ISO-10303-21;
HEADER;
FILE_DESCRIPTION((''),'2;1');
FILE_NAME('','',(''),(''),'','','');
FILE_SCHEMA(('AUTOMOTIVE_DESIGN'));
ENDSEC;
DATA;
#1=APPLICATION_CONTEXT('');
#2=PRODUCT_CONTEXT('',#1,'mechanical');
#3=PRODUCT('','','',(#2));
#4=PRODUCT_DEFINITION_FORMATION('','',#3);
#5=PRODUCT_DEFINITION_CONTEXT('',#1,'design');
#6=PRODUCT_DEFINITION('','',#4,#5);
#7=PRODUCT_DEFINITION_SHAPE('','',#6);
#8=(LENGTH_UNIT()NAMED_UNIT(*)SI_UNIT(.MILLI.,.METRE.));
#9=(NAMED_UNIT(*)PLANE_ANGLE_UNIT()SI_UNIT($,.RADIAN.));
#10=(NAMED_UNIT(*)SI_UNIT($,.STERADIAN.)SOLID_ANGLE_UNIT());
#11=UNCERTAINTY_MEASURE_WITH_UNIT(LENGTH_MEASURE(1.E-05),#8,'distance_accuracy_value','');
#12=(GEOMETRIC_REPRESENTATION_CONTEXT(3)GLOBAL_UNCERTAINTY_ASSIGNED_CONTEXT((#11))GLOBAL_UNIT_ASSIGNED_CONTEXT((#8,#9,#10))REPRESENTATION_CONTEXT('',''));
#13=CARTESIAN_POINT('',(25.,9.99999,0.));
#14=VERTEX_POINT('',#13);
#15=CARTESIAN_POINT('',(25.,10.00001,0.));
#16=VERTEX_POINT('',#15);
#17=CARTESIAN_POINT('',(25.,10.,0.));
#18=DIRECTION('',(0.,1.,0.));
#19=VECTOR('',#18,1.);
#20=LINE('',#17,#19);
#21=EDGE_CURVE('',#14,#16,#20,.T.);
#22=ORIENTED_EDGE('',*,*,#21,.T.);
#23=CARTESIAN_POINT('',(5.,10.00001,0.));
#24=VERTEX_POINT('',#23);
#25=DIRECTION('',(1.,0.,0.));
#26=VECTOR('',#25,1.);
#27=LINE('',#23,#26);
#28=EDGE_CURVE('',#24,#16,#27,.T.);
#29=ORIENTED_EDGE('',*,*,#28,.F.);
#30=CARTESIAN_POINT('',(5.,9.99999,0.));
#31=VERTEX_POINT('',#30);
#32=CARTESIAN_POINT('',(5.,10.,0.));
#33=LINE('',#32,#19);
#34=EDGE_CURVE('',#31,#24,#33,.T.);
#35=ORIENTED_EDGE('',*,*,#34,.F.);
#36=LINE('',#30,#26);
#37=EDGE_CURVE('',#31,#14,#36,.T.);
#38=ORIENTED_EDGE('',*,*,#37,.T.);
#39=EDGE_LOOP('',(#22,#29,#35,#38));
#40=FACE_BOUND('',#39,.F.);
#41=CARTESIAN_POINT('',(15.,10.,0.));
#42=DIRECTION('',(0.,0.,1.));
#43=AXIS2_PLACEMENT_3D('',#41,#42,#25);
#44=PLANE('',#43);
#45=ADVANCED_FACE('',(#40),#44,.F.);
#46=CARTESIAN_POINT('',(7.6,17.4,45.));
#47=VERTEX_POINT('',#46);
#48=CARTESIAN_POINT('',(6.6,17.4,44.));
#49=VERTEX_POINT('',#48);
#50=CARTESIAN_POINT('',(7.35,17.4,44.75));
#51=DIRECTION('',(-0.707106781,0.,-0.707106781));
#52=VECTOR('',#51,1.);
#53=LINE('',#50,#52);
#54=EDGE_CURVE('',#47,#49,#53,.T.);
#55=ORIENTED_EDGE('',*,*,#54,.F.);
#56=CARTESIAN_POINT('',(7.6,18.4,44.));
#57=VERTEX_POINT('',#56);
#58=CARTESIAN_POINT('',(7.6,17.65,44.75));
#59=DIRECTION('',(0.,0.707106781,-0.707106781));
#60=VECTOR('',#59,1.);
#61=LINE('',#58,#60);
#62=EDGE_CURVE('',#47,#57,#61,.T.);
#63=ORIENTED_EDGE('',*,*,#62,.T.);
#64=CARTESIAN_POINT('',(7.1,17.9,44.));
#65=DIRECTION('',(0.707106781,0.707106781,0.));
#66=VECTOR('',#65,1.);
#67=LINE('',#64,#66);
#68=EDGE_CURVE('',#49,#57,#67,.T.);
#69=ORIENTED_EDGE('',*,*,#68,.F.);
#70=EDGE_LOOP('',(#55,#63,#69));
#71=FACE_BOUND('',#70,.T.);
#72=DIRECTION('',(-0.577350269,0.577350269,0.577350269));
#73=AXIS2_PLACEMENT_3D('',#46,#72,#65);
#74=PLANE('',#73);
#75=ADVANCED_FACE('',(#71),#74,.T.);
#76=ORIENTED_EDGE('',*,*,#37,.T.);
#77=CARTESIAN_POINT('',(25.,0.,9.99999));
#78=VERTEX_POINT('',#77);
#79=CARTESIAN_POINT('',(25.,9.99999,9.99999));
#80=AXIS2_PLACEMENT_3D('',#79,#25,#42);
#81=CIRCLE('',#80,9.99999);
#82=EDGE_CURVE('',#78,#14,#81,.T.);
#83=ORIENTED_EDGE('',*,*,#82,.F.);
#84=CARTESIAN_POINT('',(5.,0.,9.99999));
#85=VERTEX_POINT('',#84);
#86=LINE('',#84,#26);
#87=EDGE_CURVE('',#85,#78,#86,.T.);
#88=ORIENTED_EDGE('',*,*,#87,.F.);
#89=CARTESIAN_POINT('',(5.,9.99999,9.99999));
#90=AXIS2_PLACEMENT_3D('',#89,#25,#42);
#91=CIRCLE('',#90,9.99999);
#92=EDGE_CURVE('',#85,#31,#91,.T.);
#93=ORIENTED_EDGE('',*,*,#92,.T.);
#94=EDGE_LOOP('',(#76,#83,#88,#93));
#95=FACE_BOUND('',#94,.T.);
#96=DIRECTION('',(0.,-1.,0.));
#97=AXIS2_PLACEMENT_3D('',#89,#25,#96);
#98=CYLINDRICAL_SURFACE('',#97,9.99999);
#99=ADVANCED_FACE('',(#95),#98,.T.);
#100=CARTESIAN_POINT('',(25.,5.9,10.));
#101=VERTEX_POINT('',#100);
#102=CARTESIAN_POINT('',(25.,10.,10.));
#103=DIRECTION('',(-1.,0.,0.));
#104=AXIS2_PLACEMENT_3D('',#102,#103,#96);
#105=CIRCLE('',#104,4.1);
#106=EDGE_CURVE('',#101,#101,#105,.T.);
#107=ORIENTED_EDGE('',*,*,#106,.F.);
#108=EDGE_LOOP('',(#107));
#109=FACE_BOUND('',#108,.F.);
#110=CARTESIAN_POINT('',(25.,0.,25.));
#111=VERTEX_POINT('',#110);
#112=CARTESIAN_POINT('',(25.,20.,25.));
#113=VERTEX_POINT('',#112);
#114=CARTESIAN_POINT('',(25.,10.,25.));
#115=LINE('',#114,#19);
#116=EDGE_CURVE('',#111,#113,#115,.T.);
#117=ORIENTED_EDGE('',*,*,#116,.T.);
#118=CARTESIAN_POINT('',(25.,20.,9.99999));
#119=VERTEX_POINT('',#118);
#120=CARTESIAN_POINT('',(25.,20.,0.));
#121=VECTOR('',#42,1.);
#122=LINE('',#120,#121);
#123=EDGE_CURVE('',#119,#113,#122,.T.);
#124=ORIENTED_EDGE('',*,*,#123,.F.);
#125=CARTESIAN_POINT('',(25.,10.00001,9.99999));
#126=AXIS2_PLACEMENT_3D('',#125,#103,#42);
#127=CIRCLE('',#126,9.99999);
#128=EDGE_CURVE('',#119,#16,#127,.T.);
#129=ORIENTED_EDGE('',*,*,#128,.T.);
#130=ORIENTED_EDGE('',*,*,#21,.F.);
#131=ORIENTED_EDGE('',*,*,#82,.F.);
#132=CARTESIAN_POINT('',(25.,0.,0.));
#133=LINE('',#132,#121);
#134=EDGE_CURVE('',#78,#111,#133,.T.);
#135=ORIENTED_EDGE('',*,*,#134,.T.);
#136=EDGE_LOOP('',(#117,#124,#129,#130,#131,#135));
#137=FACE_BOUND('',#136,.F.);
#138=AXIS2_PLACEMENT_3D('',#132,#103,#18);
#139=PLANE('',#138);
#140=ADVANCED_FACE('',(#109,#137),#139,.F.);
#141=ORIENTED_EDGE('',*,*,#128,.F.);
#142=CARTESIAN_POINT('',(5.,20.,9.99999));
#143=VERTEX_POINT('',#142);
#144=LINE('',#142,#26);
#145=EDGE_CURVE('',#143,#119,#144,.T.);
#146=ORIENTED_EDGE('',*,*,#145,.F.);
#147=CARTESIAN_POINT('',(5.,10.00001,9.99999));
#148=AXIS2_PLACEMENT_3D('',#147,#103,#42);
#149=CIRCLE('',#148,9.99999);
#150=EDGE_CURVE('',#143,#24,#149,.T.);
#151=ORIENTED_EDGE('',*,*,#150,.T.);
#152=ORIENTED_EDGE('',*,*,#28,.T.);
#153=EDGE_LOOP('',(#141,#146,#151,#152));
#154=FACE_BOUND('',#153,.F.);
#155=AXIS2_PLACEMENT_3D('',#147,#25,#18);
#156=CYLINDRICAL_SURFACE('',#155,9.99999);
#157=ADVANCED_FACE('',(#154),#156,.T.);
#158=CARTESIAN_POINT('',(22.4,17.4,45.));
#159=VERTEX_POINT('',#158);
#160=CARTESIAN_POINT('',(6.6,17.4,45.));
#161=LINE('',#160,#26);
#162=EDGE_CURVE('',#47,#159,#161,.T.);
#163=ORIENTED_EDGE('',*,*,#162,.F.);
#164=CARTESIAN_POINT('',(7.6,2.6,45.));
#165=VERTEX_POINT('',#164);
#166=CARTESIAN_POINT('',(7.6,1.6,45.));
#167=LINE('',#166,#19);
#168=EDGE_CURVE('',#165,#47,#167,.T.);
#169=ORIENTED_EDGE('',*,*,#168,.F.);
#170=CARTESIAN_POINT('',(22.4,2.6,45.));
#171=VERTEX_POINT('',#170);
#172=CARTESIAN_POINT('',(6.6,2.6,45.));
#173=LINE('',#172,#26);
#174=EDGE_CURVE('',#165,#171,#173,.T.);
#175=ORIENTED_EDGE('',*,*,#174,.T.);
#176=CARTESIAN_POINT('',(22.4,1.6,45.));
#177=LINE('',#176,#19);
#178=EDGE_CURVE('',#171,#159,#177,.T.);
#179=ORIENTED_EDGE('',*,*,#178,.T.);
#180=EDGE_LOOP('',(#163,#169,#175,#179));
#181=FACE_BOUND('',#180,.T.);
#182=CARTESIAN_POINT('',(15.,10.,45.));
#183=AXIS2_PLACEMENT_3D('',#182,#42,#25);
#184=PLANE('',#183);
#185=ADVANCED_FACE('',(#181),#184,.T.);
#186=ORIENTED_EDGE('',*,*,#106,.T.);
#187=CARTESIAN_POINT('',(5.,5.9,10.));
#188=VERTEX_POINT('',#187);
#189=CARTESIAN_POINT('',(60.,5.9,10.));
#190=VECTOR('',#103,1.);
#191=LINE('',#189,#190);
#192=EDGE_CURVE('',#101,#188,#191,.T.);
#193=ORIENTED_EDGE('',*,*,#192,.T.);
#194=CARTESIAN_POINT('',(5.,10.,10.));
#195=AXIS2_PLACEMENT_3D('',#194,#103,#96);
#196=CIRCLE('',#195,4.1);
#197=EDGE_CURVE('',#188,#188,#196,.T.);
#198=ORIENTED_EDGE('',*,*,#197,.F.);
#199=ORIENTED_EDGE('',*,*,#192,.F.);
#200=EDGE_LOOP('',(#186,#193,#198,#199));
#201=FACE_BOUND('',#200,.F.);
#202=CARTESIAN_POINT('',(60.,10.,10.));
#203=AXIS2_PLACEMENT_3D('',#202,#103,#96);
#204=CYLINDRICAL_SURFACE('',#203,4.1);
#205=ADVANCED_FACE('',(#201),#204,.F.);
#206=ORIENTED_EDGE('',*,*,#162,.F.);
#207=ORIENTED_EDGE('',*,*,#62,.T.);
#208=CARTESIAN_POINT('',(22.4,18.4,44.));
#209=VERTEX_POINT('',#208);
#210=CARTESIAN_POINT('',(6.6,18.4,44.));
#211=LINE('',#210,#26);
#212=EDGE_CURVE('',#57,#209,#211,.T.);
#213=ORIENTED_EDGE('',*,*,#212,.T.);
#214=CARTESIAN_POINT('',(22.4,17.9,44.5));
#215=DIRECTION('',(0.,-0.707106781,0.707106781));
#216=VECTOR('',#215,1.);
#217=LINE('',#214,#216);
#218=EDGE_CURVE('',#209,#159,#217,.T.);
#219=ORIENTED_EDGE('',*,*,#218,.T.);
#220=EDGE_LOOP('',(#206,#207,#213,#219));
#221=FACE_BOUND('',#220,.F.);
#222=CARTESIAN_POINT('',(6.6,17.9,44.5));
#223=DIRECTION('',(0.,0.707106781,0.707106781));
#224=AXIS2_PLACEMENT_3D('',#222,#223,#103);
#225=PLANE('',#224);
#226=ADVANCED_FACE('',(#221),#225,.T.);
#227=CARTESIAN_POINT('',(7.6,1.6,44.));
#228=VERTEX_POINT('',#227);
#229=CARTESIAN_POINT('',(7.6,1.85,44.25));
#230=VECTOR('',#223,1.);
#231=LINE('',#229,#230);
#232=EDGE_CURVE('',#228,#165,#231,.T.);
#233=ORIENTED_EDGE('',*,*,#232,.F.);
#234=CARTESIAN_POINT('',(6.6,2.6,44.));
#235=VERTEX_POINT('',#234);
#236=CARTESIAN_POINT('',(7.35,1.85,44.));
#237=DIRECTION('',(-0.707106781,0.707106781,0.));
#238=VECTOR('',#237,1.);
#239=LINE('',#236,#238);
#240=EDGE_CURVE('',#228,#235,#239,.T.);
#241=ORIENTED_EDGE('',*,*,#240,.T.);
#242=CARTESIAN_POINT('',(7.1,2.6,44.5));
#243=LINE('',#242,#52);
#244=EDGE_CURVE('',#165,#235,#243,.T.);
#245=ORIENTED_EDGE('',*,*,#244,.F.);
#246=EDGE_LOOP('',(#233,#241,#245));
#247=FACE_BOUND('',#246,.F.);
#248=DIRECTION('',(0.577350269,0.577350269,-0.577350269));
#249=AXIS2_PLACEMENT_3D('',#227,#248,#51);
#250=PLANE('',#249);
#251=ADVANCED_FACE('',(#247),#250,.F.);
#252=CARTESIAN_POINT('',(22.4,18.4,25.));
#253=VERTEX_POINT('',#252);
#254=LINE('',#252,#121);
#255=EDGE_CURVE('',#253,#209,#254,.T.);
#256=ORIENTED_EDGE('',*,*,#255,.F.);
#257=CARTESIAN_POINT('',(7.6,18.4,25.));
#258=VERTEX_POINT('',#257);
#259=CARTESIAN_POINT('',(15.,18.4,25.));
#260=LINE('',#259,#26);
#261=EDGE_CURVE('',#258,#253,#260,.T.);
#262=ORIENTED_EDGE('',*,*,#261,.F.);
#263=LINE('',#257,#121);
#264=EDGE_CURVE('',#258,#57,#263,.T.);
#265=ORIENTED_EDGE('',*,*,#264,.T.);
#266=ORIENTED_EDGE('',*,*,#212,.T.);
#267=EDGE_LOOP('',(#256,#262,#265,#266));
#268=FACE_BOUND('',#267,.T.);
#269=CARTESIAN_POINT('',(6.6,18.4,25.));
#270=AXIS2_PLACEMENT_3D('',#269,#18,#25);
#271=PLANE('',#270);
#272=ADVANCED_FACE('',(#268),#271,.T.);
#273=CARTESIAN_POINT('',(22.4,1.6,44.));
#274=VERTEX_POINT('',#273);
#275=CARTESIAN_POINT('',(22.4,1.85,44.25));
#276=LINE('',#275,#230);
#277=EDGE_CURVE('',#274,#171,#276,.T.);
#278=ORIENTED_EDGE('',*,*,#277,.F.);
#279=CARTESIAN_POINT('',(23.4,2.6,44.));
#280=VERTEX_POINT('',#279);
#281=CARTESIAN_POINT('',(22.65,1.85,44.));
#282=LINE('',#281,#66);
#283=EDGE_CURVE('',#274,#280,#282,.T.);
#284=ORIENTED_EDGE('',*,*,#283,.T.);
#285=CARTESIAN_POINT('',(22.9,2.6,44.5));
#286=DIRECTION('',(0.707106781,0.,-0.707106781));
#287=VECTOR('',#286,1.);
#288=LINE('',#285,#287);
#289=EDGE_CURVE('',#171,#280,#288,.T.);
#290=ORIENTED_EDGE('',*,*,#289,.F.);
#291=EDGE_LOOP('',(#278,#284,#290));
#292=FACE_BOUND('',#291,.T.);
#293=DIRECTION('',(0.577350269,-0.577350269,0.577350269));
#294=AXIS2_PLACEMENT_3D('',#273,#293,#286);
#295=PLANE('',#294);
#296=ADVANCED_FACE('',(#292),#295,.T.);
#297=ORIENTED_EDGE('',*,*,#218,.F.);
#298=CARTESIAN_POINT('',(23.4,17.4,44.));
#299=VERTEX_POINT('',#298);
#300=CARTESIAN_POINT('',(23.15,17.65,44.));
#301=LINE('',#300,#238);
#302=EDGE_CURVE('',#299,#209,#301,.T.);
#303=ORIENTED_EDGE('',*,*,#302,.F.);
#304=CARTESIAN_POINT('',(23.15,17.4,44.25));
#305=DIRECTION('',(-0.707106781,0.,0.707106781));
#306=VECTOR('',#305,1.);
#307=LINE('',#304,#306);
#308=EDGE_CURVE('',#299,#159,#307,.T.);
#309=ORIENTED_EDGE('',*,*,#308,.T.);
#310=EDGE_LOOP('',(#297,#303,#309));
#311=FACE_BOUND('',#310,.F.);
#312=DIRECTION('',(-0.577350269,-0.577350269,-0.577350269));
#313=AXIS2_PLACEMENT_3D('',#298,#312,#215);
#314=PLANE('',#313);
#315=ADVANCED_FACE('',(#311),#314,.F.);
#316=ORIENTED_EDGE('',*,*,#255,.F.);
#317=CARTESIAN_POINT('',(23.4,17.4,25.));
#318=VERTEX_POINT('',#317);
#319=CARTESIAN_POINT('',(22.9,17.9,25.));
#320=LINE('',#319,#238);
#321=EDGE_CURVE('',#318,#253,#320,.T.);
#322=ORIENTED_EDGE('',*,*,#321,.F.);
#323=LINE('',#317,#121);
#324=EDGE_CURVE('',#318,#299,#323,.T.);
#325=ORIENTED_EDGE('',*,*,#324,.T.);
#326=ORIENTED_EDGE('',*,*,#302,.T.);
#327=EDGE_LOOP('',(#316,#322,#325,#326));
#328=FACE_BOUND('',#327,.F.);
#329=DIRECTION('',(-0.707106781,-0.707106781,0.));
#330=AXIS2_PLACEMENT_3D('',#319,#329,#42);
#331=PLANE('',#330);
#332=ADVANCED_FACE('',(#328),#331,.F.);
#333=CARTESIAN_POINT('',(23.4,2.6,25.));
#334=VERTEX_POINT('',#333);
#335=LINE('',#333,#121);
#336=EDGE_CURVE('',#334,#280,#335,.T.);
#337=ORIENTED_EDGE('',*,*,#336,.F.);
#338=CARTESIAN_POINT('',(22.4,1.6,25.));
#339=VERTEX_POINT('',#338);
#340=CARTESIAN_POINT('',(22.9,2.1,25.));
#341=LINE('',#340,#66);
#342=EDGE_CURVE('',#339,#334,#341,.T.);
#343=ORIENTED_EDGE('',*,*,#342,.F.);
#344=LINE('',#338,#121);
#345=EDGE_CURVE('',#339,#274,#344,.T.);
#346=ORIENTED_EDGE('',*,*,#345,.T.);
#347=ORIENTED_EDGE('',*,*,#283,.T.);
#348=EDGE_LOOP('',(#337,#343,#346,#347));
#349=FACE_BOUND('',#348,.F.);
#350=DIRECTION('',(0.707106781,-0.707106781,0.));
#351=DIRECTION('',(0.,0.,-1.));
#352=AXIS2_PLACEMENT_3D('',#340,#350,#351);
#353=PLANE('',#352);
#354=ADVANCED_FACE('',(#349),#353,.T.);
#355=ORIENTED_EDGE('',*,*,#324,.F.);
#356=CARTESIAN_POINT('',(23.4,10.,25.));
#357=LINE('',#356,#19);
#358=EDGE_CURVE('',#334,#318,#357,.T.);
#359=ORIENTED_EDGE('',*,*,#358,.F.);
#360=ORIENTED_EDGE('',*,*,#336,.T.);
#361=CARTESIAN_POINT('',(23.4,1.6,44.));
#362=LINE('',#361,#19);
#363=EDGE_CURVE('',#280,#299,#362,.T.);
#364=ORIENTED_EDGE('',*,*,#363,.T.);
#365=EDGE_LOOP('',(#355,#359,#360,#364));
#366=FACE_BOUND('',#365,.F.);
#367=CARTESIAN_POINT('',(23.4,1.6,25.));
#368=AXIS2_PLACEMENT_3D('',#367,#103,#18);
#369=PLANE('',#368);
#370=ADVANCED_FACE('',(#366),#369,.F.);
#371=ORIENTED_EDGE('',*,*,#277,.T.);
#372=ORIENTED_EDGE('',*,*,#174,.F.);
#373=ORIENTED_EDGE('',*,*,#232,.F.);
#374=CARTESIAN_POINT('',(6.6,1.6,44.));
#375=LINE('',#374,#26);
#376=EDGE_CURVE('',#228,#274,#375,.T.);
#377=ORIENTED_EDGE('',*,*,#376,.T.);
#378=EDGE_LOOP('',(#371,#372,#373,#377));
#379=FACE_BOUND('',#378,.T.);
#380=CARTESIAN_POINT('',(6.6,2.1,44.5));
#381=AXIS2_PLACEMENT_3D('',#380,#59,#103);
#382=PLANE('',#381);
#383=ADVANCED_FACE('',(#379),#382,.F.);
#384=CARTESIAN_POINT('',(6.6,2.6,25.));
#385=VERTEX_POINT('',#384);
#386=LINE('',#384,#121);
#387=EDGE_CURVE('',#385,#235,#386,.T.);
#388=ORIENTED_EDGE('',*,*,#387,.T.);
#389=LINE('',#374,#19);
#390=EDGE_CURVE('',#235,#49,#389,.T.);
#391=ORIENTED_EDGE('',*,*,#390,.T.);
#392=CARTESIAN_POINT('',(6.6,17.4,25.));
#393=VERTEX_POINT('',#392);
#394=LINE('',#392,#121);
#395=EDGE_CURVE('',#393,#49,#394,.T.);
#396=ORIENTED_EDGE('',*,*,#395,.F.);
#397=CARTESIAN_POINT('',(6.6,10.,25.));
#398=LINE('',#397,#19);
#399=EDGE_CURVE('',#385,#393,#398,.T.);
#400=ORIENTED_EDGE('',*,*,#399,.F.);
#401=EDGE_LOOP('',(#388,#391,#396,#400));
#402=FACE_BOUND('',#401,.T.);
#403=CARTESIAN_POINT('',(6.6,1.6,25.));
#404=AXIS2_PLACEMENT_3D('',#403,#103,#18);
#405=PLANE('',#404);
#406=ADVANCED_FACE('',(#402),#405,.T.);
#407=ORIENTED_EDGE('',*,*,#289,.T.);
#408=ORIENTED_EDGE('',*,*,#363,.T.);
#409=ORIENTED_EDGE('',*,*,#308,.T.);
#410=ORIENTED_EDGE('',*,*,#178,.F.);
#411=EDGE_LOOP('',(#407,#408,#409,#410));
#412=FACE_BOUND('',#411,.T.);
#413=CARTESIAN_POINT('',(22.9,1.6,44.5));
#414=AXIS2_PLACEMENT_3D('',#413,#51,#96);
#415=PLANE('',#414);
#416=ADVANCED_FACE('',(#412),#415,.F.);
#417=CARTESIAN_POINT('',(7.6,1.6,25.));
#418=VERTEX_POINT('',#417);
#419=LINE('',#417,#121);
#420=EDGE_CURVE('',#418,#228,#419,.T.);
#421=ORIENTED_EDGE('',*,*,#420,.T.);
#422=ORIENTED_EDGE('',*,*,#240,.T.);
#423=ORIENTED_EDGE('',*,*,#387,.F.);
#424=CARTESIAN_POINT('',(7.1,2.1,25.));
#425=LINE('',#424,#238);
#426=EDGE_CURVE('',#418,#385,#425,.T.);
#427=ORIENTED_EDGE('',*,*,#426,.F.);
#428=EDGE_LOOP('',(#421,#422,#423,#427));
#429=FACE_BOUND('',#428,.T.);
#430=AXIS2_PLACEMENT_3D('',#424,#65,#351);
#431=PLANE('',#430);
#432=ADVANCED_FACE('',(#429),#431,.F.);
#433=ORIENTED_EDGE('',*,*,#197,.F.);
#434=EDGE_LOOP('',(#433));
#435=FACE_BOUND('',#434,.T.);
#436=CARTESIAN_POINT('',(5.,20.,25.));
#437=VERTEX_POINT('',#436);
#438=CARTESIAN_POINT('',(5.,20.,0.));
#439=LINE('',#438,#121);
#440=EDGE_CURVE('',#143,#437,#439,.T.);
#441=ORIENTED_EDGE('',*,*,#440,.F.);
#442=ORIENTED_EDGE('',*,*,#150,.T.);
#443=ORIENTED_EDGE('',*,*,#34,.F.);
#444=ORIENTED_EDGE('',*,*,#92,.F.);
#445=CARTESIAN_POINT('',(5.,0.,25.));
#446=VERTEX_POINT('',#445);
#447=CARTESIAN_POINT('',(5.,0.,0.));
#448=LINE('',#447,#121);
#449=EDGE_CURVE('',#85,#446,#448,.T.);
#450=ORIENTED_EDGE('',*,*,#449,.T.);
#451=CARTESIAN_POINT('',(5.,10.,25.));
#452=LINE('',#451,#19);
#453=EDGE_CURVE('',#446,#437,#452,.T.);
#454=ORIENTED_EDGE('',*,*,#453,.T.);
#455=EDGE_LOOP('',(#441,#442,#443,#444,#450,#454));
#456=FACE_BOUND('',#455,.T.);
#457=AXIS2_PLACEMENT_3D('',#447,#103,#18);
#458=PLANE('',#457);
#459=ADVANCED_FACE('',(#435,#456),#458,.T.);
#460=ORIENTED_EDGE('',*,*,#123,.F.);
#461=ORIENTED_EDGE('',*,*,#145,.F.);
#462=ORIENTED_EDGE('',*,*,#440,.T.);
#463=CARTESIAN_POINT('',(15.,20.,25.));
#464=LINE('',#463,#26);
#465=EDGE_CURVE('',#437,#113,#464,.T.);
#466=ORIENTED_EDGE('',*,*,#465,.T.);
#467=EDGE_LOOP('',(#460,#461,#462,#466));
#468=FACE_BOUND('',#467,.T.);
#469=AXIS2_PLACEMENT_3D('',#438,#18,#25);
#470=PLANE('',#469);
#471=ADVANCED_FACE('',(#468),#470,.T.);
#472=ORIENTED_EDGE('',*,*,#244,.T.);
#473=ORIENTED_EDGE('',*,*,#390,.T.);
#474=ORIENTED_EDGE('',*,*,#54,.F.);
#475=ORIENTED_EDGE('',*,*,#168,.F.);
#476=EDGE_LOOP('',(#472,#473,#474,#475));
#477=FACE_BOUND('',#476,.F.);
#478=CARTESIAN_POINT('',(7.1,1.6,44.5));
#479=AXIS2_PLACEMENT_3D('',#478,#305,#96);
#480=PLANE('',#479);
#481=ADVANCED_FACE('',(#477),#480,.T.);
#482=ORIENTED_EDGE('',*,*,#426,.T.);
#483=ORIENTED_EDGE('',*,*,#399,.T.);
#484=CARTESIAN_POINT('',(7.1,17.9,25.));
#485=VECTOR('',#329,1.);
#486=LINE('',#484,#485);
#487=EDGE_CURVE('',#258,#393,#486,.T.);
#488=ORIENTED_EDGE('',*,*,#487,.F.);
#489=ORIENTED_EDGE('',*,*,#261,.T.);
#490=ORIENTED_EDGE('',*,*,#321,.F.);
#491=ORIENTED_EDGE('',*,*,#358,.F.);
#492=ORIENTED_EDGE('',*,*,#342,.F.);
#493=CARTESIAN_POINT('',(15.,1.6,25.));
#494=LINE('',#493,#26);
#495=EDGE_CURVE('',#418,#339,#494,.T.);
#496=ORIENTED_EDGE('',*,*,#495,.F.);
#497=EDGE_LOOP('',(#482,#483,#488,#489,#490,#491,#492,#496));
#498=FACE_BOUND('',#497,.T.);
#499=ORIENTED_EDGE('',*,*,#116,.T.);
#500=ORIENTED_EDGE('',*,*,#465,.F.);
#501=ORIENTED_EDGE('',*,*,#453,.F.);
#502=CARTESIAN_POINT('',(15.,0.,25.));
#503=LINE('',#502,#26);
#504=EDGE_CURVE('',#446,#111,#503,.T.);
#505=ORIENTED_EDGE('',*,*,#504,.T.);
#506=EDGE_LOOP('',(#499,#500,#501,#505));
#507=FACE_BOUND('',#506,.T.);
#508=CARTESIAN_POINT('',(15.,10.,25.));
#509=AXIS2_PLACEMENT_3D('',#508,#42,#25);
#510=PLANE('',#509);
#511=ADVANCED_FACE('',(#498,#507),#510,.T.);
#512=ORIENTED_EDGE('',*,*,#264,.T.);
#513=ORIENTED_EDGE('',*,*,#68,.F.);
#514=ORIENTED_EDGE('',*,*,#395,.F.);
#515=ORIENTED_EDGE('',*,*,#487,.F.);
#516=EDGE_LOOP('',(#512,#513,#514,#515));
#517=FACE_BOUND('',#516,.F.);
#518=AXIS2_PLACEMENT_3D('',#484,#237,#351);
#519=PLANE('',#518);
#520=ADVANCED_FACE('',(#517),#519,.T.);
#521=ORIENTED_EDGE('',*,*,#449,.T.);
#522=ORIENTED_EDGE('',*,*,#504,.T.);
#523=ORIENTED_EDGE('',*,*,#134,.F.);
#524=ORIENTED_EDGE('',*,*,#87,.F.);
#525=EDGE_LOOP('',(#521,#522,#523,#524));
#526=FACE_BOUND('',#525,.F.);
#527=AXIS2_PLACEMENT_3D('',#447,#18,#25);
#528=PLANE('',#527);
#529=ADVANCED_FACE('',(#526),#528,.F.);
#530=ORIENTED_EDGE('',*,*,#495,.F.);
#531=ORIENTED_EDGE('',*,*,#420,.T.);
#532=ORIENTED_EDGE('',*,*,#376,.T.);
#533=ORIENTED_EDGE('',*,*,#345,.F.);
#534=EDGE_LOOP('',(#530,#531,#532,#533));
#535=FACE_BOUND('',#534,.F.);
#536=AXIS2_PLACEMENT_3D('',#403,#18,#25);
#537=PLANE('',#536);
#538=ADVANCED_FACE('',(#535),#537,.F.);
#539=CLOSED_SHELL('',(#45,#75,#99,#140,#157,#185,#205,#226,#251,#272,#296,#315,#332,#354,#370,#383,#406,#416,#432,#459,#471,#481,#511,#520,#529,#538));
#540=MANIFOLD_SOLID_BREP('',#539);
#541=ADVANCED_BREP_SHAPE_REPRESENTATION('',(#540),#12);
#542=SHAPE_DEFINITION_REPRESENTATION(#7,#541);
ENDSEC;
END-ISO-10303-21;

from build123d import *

# Parameters (mm, degrees)
F0_W     = 20
F0_H     = 20
F1_DEPTH = 25
F2_W     = 16.8
F2_H     = 16.8
F3_DEPTH = 20
F4_SIZE  = 1
F5_R     = 9.99999
F7_D     = 8.2
F7_DEPTH = 35
F7_TIP   = 2.463528538


# Not quite as in the source:
# - a fillet or chamfer is up to 0.001 mm smaller than in the source, because OpenCascade refuses the exact size


with BuildPart() as f1:
    # F0 (on Top) → F1 (new body)
    with BuildSketch(Plane.XY):
        with Locations((15, 10)):
            Rectangle(F0_W, F0_H)
    extrude(amount=F1_DEPTH)

    # F2 (on face) → F3 (join)
    with BuildSketch(Plane.XY.offset(25)):
        with Locations((15, 10)):
            Rectangle(F2_W, F2_H)
    extrude(amount=F3_DEPTH)

    # F4
    f4_edges = [f1.edges().sort_by_distance(p)[0] for p in [
        (6.6, 18.4, 35),
        (6.6, 10, 45),
        (15, 18.4, 45),
        (23.4, 18.4, 35),
        (23.4, 10, 45),
        (15, 1.6, 45),
        (6.6, 1.6, 35),
        (23.4, 1.6, 35),
    ]]
    chamfer(f4_edges, length=F4_SIZE)

    # F5 (radius 10 in the source; OpenCascade refuses exactly that, so slightly less here)
    f5_edges = [f1.edges().sort_by_distance(p)[0] for p in [
        (15, 0, 0),
        (15, 20, 0),
    ]]
    fillet(f5_edges, radius=F5_R)

    # F7
    with Locations(Plane.YZ.offset(25)):
        with Locations((10, 10)):
            Hole(F7_D / 2, depth=F7_DEPTH)
            with Locations((0, 0, -(F7_DEPTH + F7_TIP / 2))):  # 118° drill point
                Cone(0, F7_D / 2, F7_TIP, mode=Mode.SUBTRACT)


solid = f1.part
